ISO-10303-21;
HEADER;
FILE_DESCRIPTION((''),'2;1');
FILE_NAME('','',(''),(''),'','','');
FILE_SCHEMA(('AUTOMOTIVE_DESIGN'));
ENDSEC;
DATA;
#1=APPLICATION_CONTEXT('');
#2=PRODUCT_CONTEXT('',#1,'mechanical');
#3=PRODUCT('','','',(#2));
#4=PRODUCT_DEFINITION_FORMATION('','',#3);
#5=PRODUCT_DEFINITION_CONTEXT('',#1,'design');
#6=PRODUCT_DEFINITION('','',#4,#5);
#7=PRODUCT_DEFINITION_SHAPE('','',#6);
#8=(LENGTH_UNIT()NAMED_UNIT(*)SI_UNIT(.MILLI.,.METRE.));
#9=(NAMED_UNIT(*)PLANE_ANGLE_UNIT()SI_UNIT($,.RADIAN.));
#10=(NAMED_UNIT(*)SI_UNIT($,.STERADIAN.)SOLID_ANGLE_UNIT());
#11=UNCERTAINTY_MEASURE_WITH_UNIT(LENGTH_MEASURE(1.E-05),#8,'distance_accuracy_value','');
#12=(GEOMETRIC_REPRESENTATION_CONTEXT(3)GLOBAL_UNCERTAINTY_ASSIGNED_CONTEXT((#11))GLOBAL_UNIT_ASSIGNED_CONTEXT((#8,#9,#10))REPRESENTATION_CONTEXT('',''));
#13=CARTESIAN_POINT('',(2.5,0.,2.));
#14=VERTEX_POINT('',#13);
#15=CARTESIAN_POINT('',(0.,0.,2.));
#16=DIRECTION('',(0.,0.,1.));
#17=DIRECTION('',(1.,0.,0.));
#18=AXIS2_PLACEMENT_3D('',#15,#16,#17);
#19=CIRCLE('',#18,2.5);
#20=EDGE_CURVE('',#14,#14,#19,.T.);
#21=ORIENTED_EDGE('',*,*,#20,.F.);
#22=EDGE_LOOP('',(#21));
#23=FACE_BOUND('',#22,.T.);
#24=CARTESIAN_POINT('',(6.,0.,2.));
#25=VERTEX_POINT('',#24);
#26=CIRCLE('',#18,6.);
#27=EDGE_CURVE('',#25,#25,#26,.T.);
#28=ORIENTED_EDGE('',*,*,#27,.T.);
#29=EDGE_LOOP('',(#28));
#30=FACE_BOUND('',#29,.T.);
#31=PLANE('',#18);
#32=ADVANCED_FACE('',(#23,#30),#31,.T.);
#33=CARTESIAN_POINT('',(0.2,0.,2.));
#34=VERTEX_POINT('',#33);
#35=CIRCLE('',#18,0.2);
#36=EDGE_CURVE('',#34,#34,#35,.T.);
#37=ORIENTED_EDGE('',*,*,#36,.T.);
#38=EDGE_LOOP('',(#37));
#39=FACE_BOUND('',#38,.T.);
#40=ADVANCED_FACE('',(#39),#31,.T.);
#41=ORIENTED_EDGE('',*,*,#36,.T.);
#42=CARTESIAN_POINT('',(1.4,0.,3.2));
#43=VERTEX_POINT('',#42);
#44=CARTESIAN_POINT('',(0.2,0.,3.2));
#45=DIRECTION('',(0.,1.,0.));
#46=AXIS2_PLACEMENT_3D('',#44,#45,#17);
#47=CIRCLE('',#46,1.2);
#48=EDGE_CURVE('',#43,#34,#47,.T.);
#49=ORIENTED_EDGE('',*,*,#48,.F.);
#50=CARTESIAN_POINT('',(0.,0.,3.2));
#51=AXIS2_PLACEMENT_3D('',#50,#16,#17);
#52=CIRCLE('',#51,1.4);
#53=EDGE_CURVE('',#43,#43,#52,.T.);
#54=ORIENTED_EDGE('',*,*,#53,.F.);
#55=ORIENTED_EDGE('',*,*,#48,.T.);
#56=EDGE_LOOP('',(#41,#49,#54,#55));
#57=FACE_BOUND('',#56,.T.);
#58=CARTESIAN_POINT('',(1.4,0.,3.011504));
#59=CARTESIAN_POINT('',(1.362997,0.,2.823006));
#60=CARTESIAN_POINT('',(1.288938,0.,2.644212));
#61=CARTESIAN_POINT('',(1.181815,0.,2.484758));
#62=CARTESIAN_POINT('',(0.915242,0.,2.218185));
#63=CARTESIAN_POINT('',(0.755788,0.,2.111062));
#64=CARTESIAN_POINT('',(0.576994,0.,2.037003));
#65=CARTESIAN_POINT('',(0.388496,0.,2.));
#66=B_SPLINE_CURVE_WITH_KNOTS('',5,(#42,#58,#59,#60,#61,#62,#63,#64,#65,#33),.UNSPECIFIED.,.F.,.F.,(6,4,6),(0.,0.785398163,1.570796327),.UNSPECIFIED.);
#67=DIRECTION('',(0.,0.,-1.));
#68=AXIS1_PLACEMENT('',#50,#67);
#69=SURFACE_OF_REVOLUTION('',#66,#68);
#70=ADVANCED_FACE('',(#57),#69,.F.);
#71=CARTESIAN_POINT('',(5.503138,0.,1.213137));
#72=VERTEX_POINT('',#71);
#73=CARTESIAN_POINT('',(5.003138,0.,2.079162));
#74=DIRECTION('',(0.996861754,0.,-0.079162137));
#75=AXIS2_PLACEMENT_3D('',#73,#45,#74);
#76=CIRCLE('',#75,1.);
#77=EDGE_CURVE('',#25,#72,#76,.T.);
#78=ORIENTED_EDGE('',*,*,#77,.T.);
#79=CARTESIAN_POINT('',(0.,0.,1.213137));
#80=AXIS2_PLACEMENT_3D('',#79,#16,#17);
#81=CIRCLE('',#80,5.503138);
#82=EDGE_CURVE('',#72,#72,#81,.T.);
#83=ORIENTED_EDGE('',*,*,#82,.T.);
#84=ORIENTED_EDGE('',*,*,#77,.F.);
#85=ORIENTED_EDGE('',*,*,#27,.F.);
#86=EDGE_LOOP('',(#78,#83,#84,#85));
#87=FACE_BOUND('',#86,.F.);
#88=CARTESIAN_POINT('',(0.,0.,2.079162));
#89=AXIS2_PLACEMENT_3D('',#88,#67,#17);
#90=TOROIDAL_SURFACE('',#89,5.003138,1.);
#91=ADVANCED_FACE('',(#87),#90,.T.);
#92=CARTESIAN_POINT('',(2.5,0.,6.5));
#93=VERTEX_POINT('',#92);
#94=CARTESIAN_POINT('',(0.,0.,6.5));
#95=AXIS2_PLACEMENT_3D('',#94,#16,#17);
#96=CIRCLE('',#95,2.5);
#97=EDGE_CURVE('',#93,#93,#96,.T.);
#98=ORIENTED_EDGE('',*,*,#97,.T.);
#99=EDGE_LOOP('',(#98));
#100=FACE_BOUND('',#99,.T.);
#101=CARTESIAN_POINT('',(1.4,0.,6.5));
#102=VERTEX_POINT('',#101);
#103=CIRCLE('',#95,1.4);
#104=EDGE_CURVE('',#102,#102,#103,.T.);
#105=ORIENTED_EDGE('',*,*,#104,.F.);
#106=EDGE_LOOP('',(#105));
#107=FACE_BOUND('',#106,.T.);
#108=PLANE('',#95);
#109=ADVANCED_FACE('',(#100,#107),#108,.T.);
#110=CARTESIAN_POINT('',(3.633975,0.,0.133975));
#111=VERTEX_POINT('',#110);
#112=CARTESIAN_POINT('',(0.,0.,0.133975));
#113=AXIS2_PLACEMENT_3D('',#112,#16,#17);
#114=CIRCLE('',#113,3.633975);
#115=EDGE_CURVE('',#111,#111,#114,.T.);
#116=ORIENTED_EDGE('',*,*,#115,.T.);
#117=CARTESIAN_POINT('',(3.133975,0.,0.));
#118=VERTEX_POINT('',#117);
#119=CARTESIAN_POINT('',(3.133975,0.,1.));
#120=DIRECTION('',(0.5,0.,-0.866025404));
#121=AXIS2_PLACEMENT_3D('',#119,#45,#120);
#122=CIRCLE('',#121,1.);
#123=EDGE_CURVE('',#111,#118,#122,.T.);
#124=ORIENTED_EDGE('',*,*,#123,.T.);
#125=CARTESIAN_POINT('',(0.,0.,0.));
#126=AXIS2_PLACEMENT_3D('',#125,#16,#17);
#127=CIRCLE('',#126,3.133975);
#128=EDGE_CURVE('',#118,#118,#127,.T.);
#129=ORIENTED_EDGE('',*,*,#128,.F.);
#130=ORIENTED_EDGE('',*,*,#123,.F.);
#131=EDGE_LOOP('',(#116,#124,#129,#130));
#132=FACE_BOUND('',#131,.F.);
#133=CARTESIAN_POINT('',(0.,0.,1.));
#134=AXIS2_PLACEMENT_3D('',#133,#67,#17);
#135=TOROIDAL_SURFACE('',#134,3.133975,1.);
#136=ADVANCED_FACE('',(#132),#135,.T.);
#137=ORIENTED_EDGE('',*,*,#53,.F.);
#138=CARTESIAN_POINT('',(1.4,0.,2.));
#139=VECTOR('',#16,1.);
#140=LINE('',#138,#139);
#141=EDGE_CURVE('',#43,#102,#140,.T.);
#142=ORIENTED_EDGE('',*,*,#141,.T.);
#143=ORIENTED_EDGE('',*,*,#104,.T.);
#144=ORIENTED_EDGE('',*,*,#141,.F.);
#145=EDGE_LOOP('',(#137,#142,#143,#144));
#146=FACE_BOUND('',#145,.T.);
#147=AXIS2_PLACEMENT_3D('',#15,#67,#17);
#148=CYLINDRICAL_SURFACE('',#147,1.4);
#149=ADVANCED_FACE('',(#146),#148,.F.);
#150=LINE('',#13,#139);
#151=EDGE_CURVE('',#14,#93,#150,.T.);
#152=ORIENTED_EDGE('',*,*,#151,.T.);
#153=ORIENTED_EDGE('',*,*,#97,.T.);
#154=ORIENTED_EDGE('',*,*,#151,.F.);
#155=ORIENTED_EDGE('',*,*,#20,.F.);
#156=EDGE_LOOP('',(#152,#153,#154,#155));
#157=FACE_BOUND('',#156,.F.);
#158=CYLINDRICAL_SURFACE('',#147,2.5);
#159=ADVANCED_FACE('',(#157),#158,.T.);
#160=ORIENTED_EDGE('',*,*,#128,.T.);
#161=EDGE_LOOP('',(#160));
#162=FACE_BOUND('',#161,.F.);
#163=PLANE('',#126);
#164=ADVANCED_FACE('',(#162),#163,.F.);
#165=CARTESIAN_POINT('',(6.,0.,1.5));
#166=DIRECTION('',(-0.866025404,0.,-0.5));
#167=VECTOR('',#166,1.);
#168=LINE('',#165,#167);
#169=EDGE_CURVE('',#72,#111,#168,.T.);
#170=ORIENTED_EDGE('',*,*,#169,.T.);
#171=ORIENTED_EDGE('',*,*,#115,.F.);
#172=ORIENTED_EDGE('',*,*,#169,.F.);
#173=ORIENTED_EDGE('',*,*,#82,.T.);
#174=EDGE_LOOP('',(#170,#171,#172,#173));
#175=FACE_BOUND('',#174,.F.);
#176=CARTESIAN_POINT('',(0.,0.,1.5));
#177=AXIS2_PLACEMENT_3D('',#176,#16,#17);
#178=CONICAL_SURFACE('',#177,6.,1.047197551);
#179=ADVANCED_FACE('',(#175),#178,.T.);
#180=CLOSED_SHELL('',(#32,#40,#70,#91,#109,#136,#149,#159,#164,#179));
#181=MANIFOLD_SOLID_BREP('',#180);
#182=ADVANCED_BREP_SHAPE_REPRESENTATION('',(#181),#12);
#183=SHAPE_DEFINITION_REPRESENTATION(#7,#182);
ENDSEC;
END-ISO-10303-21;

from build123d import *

# Parameters (mm, degrees)
F0_R     = 6
F1_DEPTH = 2
F2_SIZE2 = 2.5980762114
F2_SIZE  = 1.5
F4_R     = 2.5
F4_R_2   = 1.4
F5_DEPTH = 4.5
F6_R     = 1.2


# Not quite as in the source:
# - a fillet or chamfer that OpenCascade refuses, or shapes differently, is made with other operations: its cross-section is extruded or revolved along the edge and cut away or added


with BuildPart() as f1:
    # F0 (on Top) → F1 (new body)
    with BuildSketch(Plane.XY):
        Circle(F0_R)
    extrude(amount=F1_DEPTH)

    # F2
    f2_edges = [f1.edges().sort_by_distance(p)[0] for p in [
        (-6, 0, 0),
    ]]
    f2_side = f1.faces().sort_by_distance((-6, 0, 1))[0]
    chamfer(f2_edges, length=F2_SIZE, length2=F2_SIZE2, reference=f2_side)

    # F3: fillet of radius 1 on 2 edges, made by hand

    # F3_s1 → F3_t2 (revolve, cut)
    with BuildSketch(Plane.XZ):
        with BuildLine():
            ThreePointArc((3.6339745962, 0.1339745962), (3.3927936413, 0.0340741737), (3.1339745962, 0))
            Line((3.1339745962, 0), (3.4019237886, 0))
            Line((3.4019237886, 0), (3.6339745962, 0.1339745962))
        make_face()
    revolve(axis=Axis((0, 0, 0), (0, 0, 1)), mode=Mode.SUBTRACT)

    # F3_s3 → F3_t4 (revolve, cut)
    with BuildSketch(Plane.XZ):
        with BuildLine():
            ThreePointArc((6, 2), (5.8486778537, 1.5452494356), (5.5031382462, 1.2131367327))
            Line((5.5031382462, 1.2131367327), (6, 1.5))
            Line((6, 1.5), (6, 2))
        make_face()
    revolve(axis=Axis((0, 0, 1.5), (0, 0, 1)), mode=Mode.SUBTRACT)

    # F4 (on face) → F5 (join)
    with BuildSketch(Plane.XY.offset(2)):
        Circle(F4_R)
        Circle(F4_R_2, mode=Mode.SUBTRACT)
    extrude(amount=F5_DEPTH)

    # F6
    f6_edges = [f1.edges().sort_by_distance(p)[0] for p in [
        (-1.4, 0, 2),
    ]]
    fillet(f6_edges, radius=F6_R)


solid = f1.part
